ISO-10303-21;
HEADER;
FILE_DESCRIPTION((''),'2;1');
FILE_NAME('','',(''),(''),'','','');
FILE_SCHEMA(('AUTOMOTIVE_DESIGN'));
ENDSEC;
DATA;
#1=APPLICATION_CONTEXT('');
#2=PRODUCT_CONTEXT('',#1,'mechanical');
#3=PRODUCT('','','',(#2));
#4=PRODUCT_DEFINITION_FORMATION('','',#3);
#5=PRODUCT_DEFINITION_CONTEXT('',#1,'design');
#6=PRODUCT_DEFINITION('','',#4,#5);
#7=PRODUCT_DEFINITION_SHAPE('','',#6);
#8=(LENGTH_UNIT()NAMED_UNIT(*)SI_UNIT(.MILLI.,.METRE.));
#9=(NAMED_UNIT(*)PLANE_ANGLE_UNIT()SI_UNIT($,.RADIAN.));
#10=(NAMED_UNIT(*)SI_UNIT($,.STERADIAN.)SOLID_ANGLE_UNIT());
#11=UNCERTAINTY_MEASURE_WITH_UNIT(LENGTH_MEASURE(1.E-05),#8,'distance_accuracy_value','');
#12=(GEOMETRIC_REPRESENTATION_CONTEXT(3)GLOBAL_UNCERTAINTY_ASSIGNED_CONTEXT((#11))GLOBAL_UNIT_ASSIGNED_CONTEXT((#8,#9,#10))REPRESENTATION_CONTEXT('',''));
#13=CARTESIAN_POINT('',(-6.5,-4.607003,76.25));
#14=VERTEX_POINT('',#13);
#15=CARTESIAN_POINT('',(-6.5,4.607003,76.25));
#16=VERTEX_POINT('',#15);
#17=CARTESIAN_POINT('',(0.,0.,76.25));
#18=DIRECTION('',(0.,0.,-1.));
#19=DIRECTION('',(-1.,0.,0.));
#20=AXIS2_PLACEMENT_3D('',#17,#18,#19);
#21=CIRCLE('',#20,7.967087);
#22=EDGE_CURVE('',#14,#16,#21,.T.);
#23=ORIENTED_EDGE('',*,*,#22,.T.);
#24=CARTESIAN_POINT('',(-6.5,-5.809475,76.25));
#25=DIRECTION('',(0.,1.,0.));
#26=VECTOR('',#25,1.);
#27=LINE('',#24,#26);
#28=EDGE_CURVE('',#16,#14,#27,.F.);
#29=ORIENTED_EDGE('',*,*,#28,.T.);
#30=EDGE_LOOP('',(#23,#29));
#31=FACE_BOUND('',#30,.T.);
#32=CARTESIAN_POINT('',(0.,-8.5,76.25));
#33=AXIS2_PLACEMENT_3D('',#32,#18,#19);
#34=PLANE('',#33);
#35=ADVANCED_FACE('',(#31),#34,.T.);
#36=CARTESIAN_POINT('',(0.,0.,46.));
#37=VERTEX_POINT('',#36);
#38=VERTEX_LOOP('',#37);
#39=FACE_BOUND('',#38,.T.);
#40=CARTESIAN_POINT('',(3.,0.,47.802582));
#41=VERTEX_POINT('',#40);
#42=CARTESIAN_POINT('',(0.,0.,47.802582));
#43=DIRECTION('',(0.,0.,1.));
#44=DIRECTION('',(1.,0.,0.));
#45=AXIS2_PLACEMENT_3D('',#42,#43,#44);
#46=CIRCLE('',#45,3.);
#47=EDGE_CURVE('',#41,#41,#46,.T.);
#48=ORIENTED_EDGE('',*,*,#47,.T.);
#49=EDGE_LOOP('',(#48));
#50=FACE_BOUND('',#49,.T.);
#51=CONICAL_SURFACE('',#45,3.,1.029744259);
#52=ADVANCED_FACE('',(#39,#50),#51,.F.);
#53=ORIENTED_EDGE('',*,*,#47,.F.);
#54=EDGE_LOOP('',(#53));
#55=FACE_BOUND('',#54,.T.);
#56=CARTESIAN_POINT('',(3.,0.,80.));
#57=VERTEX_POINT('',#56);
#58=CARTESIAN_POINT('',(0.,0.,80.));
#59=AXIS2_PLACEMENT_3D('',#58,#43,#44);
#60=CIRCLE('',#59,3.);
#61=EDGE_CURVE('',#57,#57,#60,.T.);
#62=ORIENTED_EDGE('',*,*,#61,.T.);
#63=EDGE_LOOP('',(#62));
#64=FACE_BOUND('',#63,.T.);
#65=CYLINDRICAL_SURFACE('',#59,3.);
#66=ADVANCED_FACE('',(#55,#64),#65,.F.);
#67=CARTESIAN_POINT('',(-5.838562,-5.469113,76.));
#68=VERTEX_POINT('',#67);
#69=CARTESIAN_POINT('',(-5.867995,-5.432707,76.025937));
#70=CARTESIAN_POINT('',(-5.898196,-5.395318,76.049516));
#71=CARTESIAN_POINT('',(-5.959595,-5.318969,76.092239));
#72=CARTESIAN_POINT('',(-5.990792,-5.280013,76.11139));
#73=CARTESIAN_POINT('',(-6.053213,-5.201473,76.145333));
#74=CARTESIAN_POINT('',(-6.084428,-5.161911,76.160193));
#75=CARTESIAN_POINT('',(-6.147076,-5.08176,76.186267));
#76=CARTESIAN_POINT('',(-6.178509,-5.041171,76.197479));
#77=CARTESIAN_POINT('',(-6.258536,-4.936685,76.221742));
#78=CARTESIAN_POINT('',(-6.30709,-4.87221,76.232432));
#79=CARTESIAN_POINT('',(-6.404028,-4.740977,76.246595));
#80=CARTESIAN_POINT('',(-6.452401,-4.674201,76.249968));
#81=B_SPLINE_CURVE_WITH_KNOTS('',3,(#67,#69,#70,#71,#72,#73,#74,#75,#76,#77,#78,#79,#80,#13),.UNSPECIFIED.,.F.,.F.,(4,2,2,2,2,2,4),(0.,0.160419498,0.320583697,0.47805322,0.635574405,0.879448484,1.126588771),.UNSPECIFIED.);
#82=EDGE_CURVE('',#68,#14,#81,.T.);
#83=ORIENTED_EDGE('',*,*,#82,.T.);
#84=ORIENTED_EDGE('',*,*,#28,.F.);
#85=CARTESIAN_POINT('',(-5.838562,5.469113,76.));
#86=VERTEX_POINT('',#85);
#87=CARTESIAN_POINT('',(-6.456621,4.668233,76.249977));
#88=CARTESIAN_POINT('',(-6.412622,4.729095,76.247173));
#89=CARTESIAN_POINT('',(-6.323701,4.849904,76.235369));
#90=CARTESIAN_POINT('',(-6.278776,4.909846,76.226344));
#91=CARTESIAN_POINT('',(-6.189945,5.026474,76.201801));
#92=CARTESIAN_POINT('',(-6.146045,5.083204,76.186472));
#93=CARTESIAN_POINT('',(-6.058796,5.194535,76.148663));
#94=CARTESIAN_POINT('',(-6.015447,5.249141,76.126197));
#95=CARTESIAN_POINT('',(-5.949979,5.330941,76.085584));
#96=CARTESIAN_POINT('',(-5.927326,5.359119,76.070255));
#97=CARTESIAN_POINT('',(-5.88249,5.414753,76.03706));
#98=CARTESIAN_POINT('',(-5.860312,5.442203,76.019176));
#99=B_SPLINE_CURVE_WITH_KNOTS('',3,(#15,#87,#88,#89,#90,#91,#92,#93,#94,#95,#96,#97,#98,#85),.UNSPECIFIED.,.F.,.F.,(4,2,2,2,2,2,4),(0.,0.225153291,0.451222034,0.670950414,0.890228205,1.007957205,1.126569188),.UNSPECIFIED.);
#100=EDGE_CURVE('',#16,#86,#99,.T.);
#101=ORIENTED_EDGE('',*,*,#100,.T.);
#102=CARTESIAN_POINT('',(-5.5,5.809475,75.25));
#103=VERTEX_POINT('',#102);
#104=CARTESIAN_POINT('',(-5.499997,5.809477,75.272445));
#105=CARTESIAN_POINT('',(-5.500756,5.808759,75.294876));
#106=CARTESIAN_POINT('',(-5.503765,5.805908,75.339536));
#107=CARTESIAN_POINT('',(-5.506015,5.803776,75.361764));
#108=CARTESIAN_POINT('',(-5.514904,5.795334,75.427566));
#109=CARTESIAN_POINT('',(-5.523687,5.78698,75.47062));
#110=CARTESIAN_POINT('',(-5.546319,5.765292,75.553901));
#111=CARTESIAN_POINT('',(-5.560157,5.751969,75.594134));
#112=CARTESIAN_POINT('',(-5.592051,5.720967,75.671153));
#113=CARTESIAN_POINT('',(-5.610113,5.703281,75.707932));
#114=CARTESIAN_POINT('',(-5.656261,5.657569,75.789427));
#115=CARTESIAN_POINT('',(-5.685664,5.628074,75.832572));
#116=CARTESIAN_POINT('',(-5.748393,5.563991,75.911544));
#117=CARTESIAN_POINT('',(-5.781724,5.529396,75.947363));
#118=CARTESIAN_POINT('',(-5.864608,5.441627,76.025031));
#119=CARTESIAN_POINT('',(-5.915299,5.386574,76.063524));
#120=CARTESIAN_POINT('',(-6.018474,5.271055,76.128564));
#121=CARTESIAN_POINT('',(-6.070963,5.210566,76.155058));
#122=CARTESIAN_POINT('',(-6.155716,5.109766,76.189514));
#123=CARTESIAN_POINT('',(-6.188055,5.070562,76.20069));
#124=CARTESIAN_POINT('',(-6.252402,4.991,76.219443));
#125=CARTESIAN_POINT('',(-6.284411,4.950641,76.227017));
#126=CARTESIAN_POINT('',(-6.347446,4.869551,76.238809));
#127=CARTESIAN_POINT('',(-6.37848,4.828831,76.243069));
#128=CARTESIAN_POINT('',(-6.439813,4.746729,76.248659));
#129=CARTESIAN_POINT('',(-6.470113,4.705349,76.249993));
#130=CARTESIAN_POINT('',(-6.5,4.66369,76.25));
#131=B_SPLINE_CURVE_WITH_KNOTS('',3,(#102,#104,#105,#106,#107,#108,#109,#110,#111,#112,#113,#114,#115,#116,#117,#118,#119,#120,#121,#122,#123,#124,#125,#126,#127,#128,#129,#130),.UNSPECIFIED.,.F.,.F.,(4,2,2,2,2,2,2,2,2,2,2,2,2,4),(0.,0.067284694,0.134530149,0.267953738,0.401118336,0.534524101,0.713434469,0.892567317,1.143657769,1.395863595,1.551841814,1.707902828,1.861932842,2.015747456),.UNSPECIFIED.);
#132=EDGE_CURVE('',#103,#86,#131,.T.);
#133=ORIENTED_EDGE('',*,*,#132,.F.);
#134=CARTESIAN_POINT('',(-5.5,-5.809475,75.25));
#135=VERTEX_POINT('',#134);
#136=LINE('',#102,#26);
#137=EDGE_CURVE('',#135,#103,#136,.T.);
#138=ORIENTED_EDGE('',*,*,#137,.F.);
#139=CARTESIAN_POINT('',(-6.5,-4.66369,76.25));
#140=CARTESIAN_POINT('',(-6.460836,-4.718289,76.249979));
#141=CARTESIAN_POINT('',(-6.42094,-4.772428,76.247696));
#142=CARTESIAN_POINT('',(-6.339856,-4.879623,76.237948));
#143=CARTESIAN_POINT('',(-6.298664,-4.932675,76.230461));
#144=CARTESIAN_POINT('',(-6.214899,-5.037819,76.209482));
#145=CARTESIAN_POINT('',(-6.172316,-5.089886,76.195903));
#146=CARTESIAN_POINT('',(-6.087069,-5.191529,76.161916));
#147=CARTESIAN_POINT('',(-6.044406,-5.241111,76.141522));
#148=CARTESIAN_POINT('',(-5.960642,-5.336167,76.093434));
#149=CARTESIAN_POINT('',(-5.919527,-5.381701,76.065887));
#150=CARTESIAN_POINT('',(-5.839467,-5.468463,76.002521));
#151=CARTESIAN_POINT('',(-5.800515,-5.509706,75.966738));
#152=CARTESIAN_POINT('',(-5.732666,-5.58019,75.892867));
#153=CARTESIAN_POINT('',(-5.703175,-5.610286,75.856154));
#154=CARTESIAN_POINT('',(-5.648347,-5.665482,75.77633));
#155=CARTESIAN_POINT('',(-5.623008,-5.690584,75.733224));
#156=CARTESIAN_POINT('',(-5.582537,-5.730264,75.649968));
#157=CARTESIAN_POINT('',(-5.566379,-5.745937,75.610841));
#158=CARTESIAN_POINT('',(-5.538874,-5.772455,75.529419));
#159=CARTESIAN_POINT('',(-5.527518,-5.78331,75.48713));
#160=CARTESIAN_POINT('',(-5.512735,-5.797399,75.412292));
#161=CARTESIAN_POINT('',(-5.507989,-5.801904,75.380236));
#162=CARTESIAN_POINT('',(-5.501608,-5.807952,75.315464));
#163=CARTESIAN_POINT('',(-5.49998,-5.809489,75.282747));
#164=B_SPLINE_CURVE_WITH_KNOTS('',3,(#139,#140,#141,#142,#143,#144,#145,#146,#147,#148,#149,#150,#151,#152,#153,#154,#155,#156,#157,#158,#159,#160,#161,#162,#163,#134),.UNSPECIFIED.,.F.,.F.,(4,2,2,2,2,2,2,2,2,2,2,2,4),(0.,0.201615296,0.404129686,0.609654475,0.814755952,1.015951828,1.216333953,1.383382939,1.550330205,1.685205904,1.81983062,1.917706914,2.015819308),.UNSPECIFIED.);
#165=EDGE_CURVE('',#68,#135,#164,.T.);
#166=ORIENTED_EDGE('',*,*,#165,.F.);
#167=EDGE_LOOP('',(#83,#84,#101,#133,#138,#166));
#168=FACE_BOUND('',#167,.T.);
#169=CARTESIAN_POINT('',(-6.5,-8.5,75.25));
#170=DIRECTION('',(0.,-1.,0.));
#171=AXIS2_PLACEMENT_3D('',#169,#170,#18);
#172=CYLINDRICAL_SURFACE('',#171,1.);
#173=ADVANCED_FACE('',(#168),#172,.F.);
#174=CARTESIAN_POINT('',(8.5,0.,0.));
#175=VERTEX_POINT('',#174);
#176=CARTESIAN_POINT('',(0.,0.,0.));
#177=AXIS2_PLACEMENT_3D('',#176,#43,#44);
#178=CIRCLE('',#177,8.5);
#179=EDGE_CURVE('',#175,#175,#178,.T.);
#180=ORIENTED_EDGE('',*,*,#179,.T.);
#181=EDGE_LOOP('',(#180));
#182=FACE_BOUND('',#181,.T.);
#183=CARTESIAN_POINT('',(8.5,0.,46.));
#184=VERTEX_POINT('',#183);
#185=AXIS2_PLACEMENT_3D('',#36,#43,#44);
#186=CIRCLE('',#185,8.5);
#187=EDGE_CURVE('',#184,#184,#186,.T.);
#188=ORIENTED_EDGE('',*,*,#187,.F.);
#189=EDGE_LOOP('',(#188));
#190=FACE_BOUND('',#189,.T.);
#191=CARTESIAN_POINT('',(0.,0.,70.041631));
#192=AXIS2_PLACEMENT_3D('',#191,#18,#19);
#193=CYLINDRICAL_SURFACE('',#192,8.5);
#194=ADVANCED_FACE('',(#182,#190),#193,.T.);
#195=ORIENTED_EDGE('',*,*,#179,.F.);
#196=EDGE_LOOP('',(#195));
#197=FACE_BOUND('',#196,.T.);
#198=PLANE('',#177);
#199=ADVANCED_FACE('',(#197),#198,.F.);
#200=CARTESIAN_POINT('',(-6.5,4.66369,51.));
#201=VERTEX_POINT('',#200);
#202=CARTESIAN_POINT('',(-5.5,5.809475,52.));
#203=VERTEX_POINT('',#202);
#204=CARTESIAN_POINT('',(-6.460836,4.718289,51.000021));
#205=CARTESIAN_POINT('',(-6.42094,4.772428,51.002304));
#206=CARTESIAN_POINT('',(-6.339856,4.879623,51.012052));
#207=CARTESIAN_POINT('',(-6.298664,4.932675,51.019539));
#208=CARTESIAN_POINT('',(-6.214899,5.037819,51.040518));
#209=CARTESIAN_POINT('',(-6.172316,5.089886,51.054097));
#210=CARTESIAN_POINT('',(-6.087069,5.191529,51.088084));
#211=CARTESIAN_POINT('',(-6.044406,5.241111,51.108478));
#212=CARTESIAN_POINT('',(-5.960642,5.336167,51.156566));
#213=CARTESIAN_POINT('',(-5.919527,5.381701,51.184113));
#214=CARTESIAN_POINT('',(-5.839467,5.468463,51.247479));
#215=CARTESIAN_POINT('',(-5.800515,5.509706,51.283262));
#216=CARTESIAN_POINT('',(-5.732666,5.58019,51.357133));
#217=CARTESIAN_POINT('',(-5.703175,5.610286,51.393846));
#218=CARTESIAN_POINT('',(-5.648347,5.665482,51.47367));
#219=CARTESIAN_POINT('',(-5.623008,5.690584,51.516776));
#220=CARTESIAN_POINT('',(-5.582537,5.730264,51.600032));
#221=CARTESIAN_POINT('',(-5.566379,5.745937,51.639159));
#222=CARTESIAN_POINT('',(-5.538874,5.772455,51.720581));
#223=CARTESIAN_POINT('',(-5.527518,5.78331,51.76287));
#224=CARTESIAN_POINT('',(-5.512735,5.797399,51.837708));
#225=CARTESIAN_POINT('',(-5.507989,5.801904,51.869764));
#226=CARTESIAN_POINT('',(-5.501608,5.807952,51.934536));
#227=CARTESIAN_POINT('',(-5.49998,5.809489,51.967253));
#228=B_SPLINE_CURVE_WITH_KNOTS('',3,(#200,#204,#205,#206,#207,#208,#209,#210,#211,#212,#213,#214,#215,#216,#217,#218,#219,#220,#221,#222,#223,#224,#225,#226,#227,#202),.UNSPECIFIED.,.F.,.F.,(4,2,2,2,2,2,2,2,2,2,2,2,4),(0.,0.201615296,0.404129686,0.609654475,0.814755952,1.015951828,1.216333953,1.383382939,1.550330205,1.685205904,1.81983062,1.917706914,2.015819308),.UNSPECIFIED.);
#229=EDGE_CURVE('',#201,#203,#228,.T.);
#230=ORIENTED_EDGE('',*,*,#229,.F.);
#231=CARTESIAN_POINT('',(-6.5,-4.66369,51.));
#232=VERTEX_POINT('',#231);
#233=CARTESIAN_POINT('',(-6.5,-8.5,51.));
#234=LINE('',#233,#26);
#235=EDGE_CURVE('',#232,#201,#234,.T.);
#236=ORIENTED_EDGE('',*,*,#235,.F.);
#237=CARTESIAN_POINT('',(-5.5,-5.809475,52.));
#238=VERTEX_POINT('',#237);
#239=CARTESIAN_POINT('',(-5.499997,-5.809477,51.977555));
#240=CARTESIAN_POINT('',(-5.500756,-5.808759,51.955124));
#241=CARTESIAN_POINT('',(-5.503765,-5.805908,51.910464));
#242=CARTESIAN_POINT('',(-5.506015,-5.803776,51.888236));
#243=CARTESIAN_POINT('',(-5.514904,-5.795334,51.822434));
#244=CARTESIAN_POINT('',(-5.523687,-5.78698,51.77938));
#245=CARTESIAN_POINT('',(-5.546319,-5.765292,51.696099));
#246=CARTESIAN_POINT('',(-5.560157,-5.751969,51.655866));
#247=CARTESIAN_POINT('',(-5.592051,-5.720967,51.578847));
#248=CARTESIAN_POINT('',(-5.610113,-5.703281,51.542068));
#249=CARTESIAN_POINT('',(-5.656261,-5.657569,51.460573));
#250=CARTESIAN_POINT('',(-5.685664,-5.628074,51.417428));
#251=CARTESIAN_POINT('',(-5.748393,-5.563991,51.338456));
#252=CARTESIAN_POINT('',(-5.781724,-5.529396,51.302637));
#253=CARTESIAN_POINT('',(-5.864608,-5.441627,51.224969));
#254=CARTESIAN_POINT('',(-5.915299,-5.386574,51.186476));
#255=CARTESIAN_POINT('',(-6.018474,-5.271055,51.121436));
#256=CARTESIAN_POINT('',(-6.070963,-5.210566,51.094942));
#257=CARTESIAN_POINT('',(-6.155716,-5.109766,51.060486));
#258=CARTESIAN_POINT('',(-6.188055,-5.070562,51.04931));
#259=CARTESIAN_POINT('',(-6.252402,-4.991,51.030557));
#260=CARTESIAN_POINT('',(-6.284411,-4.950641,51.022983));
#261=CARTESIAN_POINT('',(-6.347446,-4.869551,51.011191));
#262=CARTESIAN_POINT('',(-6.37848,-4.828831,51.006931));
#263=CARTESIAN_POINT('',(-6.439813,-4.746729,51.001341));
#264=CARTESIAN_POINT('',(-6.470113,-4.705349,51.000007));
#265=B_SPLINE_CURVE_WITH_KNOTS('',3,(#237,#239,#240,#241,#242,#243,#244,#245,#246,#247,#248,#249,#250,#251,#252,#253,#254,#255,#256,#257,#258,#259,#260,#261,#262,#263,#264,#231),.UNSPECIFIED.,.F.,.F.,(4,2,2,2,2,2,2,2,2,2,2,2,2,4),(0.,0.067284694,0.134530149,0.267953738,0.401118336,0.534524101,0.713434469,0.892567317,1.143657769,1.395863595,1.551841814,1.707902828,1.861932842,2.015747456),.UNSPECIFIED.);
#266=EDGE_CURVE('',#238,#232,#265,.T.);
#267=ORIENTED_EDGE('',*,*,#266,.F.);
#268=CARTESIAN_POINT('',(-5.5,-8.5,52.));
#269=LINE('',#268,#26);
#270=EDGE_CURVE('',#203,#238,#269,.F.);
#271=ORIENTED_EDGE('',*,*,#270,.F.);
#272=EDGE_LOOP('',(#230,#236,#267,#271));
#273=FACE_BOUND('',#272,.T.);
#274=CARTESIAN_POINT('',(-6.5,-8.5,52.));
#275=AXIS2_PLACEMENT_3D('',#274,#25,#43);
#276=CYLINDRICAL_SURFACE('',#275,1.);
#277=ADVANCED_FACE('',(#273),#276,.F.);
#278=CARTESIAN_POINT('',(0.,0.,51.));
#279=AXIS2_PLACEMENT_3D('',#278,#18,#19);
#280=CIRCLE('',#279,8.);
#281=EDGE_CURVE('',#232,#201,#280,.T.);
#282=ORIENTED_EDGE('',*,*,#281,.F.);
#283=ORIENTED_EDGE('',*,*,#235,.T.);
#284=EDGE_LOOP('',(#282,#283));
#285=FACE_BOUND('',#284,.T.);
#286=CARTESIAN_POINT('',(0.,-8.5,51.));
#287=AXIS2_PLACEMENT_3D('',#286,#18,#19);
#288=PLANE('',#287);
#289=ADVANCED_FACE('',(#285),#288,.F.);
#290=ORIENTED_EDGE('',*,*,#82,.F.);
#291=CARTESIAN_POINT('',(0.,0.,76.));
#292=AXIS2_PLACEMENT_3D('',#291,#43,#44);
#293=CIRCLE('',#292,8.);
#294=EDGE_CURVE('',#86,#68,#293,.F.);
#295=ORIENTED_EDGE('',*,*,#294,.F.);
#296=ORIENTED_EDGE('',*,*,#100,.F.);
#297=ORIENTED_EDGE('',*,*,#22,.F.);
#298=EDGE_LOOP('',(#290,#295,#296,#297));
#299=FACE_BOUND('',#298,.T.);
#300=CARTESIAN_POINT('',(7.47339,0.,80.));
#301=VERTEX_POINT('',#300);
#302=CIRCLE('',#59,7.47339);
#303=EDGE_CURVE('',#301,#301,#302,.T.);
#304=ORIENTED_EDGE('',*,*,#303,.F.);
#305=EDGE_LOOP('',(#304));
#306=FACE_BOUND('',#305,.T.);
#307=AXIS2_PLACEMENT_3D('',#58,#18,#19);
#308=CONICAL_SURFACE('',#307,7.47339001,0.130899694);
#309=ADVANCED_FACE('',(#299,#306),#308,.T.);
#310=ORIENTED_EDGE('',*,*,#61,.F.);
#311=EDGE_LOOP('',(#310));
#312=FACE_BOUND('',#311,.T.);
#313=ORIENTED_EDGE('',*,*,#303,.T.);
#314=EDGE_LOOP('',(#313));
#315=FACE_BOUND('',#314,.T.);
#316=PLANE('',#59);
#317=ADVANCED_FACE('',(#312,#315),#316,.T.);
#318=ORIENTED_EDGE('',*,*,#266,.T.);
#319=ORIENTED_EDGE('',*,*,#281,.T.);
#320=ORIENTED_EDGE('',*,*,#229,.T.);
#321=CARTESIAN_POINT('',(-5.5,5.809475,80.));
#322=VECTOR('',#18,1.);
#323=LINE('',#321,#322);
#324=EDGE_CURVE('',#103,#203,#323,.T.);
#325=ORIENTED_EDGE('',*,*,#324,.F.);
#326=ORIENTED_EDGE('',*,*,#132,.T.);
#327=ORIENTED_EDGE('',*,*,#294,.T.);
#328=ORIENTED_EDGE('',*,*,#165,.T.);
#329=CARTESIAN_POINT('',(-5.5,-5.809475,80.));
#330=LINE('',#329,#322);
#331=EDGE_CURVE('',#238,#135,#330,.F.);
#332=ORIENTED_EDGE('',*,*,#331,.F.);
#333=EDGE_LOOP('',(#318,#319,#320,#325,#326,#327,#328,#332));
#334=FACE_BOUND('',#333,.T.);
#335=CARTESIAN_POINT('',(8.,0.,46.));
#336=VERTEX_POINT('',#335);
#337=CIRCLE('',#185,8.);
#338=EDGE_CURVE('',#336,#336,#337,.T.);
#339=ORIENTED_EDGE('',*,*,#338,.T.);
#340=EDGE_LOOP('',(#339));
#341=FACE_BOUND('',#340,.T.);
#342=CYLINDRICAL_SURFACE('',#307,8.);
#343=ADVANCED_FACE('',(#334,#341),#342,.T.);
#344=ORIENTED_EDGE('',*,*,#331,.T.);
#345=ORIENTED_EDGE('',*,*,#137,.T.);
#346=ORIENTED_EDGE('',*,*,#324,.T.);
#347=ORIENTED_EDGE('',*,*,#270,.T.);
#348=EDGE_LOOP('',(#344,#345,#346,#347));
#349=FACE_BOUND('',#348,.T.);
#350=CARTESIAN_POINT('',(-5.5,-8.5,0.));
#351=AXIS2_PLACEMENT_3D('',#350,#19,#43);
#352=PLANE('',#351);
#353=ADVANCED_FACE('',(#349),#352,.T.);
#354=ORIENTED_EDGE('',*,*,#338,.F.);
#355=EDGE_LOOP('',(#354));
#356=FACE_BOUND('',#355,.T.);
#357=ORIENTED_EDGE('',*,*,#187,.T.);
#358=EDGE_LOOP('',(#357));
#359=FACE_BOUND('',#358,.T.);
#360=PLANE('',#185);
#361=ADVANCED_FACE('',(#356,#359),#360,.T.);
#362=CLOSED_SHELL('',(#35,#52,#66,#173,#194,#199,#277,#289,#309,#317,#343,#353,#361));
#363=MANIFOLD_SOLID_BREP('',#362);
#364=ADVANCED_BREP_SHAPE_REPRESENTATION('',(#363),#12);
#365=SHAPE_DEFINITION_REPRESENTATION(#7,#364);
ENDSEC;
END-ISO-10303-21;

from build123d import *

# Parameters (mm, degrees)
SKETCH1_R                 = 8.5
BOSS_EXTRUDE1_DEPTH       = 46
SKETCH2_R                 = 8
BOSS_EXTRUDE2_DEPTH       = 34
CUT_EXTRUDE1_DEPTH        = 81.898084032
CUT_EXTRUDE1_DEPTH_BACK   = 81.898084032
SKETCH3_W                 = 2.5
SKETCH3_H                 = 25.25
FILLET1_R                 = 1
F_6_0MM_DOWEL_HOLE1_D     = 6
F_6_0MM_DOWEL_HOLE1_DEPTH = 32.197418143
F_6_0MM_DOWEL_HOLE1_TIP   = 1.802581857


with BuildPart() as part:
    # Sketch1 → Boss-Extrude1 (new body)
    with BuildSketch(Plane.XY):
        Circle(SKETCH1_R)
    extrude(amount=BOSS_EXTRUDE1_DEPTH)

    # Sketch2 → Boss-Extrude2 (add)
    with BuildSketch(Plane.XY.offset(46)):
        Circle(SKETCH2_R)
    extrude(amount=BOSS_EXTRUDE2_DEPTH)

    # Sketch3 → Cut-Extrude1 (cut, two sides: drawn at the far end of the back side and taken through both)
    with BuildSketch(Plane(origin=(0, 0, 0), x_dir=(1, 0, 0), z_dir=(0, 1, 0)).offset(-CUT_EXTRUDE1_DEPTH_BACK)):
        with Locations((-6.75, -63.625)):
            Rectangle(SKETCH3_W, SKETCH3_H)
    extrude(amount=CUT_EXTRUDE1_DEPTH + CUT_EXTRUDE1_DEPTH_BACK, mode=Mode.SUBTRACT)

    # Fillet1
    fillet1_edges = [part.edges().sort_by_distance(p)[0] for p in [
        (-5.5, 0, 51),
        (-5.5, 0, 76.25),
    ]]
    fillet(fillet1_edges, radius=FILLET1_R)

    # Chamfer1: read off the stored shape, not the designer's step
    # Chamfer1 outline → Chamfer1 (revolve, cut)
    with BuildSketch(Plane.XZ):
        Polygon((8, 80), (7.47339001, 80), (8, 76), align=None)
    revolve(axis=Axis((0, 0, 0), (0, 0, 1)), mode=Mode.SUBTRACT)

    # Ø6.0mm Dowel Hole1
    with Locations(Plane.XY.offset(80)):
        with Locations((0, 0)):
            Hole(F_6_0MM_DOWEL_HOLE1_D / 2, depth=F_6_0MM_DOWEL_HOLE1_DEPTH)
            with Locations((0, 0, -(F_6_0MM_DOWEL_HOLE1_DEPTH + F_6_0MM_DOWEL_HOLE1_TIP / 2))):  # 118° drill point
                Cone(0, F_6_0MM_DOWEL_HOLE1_D / 2, F_6_0MM_DOWEL_HOLE1_TIP, mode=Mode.SUBTRACT)


solid = part.part
